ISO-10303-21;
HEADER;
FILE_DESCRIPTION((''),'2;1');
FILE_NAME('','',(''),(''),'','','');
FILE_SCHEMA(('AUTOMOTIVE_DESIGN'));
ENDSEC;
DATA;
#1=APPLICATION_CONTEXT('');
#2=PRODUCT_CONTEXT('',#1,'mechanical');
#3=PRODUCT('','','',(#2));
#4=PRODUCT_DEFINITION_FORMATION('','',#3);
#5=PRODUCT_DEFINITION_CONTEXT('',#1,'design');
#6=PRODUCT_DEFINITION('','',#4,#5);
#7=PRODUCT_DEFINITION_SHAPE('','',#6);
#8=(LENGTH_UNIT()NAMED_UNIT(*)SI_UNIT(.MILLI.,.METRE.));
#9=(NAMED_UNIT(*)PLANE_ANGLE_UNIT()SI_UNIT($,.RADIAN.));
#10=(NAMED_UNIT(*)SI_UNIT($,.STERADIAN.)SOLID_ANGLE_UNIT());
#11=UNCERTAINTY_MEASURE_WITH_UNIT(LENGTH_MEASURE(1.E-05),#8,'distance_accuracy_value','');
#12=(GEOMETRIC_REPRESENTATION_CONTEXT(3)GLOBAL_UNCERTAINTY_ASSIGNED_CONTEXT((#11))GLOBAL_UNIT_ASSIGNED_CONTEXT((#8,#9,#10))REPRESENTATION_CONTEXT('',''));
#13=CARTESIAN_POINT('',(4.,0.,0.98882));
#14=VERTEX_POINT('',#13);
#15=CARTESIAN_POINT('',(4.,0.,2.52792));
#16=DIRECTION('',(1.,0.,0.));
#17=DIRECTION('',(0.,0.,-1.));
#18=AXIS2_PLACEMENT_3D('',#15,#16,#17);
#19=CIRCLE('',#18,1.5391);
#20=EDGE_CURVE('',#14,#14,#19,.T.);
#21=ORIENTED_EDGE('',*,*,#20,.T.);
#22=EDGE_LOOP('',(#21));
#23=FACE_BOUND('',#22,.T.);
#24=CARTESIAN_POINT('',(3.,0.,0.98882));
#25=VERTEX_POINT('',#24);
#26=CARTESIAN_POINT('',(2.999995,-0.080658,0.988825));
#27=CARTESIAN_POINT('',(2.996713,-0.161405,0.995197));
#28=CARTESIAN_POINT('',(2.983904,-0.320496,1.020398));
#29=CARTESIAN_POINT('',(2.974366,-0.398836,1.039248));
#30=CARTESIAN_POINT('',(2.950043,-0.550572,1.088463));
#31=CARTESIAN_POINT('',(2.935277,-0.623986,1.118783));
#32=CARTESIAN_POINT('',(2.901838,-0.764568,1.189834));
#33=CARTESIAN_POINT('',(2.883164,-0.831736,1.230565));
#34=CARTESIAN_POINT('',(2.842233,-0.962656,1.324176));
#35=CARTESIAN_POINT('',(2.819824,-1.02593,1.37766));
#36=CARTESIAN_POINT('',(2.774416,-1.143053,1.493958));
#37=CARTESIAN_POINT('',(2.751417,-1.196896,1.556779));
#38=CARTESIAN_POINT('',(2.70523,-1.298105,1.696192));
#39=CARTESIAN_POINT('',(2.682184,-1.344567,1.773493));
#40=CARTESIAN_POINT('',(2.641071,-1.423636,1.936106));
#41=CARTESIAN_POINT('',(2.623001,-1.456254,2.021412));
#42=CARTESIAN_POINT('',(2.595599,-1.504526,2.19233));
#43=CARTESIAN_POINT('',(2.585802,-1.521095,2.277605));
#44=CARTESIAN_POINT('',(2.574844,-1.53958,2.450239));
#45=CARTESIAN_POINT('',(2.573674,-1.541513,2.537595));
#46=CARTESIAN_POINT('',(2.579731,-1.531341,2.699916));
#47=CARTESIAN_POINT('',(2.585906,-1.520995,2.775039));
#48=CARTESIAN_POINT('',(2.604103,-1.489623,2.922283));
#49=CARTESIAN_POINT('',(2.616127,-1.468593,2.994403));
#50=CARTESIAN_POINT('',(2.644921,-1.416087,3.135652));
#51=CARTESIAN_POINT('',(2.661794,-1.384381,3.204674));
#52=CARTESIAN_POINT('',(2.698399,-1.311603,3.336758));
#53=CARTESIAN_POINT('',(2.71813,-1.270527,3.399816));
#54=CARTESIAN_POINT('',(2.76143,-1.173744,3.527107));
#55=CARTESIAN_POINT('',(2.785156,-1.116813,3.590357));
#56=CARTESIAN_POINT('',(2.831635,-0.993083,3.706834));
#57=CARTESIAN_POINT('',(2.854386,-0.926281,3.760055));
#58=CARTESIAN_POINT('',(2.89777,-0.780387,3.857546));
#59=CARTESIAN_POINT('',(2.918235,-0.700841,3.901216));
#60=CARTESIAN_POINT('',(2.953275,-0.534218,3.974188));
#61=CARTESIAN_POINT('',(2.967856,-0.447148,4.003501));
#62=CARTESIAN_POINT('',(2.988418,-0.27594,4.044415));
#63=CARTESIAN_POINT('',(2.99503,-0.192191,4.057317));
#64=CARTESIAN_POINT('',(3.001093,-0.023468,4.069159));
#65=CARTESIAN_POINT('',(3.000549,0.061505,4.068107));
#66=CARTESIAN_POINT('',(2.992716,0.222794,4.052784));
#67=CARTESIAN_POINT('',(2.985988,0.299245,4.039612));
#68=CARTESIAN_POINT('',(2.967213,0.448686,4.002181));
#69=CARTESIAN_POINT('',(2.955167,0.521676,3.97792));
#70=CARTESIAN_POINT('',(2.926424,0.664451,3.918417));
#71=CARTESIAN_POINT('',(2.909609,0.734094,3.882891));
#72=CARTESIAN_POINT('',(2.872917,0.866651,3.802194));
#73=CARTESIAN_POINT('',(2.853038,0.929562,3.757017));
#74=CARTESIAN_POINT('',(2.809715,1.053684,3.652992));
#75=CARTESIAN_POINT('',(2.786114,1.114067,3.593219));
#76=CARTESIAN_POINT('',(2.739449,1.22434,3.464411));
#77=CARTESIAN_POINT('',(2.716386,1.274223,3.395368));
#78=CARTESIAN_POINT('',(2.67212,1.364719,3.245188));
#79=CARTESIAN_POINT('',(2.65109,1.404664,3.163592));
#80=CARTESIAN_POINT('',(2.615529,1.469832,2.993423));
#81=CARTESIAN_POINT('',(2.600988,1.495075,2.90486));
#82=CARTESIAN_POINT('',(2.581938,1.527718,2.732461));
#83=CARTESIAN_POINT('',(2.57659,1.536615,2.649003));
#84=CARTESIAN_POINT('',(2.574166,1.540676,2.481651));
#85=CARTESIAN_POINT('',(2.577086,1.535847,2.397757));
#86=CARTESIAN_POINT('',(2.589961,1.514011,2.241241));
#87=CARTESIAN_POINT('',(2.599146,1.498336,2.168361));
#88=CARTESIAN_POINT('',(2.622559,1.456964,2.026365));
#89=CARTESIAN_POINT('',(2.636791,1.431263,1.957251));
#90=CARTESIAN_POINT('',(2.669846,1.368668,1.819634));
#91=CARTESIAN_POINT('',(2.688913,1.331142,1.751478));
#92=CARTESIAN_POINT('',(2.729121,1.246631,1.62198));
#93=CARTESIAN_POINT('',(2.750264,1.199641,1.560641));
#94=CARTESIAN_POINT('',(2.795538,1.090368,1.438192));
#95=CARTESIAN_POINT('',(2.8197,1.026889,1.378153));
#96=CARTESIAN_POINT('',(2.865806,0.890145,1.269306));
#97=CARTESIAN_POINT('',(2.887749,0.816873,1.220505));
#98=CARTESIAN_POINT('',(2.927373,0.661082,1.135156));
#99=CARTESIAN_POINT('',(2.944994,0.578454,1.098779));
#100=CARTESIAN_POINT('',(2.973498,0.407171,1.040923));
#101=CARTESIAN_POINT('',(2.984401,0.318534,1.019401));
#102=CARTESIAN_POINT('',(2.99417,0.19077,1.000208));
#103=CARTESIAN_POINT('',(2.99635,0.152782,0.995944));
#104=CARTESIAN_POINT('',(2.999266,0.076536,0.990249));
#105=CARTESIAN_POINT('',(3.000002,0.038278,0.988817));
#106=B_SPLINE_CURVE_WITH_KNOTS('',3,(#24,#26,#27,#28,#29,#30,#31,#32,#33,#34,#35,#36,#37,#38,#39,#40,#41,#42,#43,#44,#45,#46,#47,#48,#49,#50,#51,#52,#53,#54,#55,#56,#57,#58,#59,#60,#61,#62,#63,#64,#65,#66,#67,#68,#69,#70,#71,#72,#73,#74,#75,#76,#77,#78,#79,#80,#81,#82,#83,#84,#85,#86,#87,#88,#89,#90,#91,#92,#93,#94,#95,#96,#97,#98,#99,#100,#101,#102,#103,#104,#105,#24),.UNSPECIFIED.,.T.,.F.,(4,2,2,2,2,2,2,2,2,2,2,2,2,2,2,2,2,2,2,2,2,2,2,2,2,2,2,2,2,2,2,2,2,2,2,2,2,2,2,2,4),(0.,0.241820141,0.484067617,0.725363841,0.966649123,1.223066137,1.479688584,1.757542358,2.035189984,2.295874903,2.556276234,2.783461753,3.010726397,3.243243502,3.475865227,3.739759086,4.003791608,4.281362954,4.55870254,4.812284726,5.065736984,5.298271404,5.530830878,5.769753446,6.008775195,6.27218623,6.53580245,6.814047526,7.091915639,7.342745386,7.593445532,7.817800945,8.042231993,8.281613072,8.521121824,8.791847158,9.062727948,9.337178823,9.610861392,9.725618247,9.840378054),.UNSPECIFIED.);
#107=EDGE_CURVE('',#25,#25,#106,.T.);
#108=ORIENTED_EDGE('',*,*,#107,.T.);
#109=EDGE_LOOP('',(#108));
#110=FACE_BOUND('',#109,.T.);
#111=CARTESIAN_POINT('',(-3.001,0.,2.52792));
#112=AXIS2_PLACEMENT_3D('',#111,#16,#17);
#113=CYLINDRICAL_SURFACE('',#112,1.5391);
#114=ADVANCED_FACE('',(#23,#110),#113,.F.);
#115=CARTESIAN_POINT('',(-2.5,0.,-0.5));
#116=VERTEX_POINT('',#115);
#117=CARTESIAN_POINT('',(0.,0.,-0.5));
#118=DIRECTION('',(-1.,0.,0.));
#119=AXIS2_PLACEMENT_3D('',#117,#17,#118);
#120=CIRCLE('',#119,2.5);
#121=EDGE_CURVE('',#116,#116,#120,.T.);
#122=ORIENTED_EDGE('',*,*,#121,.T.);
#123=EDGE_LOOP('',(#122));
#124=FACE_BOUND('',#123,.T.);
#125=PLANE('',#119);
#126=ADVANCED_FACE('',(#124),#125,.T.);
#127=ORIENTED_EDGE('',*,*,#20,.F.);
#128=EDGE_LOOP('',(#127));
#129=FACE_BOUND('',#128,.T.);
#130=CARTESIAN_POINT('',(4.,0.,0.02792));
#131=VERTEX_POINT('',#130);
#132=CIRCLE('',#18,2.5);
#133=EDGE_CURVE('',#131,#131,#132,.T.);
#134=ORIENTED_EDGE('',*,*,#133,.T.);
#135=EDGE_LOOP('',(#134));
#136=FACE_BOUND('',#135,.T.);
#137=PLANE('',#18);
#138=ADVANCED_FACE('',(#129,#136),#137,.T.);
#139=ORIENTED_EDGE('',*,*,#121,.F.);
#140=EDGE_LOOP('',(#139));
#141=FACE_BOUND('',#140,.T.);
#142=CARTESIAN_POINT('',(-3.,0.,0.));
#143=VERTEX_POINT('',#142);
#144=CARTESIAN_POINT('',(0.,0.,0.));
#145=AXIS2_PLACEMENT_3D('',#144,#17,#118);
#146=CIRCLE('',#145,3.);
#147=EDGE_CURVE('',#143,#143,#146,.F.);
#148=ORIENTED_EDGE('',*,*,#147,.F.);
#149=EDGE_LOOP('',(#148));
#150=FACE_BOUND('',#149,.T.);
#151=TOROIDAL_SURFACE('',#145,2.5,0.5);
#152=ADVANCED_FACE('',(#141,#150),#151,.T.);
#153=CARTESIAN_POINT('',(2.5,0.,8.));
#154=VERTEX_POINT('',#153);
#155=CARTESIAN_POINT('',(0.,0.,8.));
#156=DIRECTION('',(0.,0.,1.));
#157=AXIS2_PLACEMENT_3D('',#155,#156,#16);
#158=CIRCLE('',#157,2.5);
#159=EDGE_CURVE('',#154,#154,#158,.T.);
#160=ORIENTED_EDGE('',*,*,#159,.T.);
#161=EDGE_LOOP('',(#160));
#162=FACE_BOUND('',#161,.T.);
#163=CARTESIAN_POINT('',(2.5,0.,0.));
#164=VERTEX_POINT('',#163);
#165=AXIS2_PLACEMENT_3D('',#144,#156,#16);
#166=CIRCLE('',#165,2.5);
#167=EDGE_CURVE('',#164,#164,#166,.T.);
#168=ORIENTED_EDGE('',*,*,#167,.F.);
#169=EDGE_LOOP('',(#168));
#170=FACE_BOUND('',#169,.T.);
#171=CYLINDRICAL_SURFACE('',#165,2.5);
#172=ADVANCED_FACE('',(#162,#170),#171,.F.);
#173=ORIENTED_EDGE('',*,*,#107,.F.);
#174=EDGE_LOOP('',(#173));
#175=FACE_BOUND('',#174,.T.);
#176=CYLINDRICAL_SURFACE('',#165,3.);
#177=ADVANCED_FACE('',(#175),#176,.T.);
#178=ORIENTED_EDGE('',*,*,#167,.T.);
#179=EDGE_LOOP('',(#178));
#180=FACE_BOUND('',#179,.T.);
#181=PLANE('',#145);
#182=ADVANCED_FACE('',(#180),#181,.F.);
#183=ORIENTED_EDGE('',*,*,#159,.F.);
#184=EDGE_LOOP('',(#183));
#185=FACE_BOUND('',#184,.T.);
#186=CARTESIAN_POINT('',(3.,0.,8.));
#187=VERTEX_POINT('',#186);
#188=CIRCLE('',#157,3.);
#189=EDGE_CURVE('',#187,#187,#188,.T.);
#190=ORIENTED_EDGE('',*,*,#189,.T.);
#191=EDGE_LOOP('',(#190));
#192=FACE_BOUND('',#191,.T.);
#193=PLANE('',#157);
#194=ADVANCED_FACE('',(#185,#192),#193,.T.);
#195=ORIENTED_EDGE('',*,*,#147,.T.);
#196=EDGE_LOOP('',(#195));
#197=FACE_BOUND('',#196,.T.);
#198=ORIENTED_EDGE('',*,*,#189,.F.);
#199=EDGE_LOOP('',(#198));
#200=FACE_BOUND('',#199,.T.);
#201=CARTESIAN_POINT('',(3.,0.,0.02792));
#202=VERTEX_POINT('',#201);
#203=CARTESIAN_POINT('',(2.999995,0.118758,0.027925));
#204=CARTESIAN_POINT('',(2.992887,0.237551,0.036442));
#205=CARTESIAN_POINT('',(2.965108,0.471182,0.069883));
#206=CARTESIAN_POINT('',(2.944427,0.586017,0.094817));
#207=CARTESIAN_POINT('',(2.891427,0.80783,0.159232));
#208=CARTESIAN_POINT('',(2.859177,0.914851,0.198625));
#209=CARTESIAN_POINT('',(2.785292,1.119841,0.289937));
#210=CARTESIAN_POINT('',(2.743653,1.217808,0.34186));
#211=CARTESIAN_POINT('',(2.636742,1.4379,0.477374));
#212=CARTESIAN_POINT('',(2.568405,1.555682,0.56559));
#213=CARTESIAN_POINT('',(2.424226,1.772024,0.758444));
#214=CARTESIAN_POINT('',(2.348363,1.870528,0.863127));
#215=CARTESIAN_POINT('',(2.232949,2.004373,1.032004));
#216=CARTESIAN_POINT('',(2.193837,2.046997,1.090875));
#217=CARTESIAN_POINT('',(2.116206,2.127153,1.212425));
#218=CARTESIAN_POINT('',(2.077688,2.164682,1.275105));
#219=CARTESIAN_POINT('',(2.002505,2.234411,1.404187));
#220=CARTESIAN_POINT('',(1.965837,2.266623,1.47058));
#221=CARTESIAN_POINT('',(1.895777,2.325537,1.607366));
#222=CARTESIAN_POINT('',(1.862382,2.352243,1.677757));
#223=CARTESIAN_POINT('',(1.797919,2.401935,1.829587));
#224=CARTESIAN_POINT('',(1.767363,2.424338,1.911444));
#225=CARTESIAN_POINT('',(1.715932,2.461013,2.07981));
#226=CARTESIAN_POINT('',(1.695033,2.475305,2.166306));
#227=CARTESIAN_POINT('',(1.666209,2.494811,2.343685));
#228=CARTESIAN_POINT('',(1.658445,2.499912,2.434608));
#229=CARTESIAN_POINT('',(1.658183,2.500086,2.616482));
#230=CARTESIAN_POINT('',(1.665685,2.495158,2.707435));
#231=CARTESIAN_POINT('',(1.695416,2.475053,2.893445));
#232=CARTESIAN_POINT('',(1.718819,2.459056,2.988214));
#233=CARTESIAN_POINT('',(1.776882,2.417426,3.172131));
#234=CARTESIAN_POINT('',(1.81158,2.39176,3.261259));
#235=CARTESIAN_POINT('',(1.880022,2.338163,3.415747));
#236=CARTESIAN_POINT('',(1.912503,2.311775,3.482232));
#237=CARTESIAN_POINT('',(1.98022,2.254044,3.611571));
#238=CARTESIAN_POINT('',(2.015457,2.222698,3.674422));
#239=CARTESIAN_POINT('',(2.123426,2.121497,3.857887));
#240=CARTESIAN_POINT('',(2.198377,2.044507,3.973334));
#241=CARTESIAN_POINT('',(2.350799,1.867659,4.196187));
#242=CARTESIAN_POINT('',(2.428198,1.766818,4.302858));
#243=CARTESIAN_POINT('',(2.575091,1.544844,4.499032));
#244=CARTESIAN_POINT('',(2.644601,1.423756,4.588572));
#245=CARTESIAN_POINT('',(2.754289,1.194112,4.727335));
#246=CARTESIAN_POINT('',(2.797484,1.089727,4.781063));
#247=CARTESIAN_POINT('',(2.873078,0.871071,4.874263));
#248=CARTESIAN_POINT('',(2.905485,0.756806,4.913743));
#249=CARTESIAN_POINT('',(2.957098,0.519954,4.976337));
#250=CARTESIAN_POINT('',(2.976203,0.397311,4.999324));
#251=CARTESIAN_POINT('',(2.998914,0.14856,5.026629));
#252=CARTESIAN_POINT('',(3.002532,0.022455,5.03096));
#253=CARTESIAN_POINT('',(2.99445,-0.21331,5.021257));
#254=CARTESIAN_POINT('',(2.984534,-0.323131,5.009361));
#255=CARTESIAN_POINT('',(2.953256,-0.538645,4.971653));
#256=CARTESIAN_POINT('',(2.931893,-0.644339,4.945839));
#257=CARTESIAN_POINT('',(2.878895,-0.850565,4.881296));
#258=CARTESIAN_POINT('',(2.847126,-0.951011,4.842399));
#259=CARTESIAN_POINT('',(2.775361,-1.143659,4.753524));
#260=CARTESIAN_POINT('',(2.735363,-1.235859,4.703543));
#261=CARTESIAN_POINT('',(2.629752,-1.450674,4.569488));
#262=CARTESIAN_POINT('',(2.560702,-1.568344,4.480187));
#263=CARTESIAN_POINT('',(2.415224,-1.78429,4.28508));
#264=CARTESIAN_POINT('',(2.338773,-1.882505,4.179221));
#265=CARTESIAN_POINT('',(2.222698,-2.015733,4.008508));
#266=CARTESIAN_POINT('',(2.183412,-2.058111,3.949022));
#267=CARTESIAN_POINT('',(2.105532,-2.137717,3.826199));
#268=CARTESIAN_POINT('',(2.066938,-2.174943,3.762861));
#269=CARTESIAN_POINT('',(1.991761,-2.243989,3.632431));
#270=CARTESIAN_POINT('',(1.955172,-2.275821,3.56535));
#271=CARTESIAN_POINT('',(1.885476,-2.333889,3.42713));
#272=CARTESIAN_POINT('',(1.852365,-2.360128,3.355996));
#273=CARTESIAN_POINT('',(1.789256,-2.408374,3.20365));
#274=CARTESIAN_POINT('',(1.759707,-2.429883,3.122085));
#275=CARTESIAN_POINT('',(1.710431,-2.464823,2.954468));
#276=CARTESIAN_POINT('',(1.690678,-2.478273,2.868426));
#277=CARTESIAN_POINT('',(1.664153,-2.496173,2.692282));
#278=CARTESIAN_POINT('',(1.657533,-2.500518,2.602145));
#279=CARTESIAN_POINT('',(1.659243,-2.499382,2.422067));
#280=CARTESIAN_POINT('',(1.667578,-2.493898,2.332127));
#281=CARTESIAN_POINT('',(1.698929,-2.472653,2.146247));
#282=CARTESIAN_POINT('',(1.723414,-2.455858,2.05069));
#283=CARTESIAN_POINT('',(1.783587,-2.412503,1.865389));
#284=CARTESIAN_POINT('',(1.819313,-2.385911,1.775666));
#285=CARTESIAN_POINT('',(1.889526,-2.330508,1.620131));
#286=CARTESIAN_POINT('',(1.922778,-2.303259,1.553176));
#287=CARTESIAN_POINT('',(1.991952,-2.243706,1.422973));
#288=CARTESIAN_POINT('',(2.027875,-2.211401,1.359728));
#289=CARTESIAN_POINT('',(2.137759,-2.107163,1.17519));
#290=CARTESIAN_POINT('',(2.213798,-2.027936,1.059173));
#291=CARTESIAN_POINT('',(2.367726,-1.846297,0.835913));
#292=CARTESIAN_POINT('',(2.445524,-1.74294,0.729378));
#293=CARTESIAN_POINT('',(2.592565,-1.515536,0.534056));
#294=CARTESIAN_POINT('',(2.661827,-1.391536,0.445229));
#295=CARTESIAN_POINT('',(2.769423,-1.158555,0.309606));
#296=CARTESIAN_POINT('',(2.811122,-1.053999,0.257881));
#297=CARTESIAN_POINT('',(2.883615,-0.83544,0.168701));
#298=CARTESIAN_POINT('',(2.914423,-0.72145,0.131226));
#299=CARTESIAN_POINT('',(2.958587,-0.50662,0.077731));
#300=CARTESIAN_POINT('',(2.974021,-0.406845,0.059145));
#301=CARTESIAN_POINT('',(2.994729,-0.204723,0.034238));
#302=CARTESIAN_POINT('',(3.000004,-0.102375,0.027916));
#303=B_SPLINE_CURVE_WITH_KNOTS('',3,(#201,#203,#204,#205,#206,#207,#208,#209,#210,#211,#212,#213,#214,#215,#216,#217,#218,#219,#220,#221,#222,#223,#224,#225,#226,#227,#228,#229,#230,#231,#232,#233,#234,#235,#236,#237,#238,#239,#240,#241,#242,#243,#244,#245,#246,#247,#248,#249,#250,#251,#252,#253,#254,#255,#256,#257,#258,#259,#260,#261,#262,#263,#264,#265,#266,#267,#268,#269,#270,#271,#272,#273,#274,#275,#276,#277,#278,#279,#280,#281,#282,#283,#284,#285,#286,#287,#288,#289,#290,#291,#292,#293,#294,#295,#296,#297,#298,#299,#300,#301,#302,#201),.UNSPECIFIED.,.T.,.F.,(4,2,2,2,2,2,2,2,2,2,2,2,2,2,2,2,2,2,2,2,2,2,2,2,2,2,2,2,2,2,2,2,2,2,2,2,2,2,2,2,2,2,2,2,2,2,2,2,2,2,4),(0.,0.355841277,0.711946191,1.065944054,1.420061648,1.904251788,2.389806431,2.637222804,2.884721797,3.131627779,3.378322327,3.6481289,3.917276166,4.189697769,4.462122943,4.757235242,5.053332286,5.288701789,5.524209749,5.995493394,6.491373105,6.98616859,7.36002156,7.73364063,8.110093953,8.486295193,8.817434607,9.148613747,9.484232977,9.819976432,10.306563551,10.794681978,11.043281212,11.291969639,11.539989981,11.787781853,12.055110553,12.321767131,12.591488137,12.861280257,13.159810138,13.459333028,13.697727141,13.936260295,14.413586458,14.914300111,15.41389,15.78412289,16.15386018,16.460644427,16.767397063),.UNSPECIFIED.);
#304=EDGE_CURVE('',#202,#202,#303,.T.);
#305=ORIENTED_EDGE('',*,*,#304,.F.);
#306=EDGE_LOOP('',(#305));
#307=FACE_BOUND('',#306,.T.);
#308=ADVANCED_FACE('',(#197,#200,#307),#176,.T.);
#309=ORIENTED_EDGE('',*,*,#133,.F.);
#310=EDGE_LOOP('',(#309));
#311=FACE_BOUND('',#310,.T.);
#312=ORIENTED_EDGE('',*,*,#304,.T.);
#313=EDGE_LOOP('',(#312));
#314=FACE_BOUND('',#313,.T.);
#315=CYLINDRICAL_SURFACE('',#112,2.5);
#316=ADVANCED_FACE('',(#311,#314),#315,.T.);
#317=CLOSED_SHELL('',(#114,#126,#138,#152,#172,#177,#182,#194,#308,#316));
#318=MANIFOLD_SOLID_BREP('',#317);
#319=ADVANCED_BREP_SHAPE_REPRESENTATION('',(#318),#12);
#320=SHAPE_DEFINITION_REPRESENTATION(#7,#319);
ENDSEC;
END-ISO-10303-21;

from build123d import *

# Parameters (mm, degrees)
SKETCH2_R                = 3
SKETCH2_R_2              = 2.5
BOSS_EXTRUDE1_DEPTH      = 8
BOSS_EXTRUDE6_REACH      = 11.394
BOSS_EXTRUDE6_END_RADIUS = 3
SKETCH7_R                = 2.5
SKETCH7_R_2              = 1.539100033
SKETCH8_R                = 3
BOSS_EXTRUDE7_DEPTH      = 0.5


with BuildPart() as part:
    # Sketch2 → Boss-Extrude1 (new body)
    with BuildSketch(Plane.XY.offset(8)):
        Circle(SKETCH2_R)
        Circle(SKETCH2_R_2, mode=Mode.SUBTRACT)
    extrude(amount=-BOSS_EXTRUDE1_DEPTH)

    # Boss-Extrude6: up to this cylinder (the profile starts outside it)
    boss_extrude6_end = Plane(origin=(0, 0, 4.957209), z_dir=(0, 0, 1)) * Cylinder(BOSS_EXTRUDE6_END_RADIUS, 29.788, mode=Mode.PRIVATE)
    # Sketch7 → Boss-Extrude6 (add, up to the surface)
    with BuildSketch(Plane(origin=(4, 0, 2.500950228), x_dir=(0, 0, -1), z_dir=(1, 0, 0)), mode=Mode.PRIVATE) as boss_extrude6_sk1:
        with Locations((-0.026969657, 0)):
            Circle(SKETCH7_R)
        with Locations((-0.026969657, 0)):
            Circle(SKETCH7_R_2, mode=Mode.SUBTRACT)
    boss_extrude6_tool1 = extrude(boss_extrude6_sk1.sketch, amount=-BOSS_EXTRUDE6_REACH, mode=Mode.PRIVATE) - boss_extrude6_end
    add(boss_extrude6_tool1.solids().sort_by_distance((4, 0, 4.957209))[0])

    # Sketch8 → Boss-Extrude7 (add)
    with BuildSketch(Plane(origin=(0, 0, 0), x_dir=(-1, 0, 0), z_dir=(0, 0, -1))):
        with Locations(Location((0, 0, 0), (0, 0, 180))):
            Circle(SKETCH8_R)
    extrude(amount=BOSS_EXTRUDE7_DEPTH)

    # Fillet2: read off the stored shape, not the designer's step
    # Fillet2 outline → Fillet2 (revolve, cut)
    with BuildSketch(Plane.XZ):
        with BuildLine():
            Line((3, -0.5), (3, 0))
            ThreePointArc((3, 0), (2.853553391, -0.353553391), (2.5, -0.5))
            Line((2.5, -0.5), (3, -0.5))
        make_face()
    revolve(axis=Axis((0, 0, 0), (0, 0, 1)), mode=Mode.SUBTRACT)


solid = part.part
